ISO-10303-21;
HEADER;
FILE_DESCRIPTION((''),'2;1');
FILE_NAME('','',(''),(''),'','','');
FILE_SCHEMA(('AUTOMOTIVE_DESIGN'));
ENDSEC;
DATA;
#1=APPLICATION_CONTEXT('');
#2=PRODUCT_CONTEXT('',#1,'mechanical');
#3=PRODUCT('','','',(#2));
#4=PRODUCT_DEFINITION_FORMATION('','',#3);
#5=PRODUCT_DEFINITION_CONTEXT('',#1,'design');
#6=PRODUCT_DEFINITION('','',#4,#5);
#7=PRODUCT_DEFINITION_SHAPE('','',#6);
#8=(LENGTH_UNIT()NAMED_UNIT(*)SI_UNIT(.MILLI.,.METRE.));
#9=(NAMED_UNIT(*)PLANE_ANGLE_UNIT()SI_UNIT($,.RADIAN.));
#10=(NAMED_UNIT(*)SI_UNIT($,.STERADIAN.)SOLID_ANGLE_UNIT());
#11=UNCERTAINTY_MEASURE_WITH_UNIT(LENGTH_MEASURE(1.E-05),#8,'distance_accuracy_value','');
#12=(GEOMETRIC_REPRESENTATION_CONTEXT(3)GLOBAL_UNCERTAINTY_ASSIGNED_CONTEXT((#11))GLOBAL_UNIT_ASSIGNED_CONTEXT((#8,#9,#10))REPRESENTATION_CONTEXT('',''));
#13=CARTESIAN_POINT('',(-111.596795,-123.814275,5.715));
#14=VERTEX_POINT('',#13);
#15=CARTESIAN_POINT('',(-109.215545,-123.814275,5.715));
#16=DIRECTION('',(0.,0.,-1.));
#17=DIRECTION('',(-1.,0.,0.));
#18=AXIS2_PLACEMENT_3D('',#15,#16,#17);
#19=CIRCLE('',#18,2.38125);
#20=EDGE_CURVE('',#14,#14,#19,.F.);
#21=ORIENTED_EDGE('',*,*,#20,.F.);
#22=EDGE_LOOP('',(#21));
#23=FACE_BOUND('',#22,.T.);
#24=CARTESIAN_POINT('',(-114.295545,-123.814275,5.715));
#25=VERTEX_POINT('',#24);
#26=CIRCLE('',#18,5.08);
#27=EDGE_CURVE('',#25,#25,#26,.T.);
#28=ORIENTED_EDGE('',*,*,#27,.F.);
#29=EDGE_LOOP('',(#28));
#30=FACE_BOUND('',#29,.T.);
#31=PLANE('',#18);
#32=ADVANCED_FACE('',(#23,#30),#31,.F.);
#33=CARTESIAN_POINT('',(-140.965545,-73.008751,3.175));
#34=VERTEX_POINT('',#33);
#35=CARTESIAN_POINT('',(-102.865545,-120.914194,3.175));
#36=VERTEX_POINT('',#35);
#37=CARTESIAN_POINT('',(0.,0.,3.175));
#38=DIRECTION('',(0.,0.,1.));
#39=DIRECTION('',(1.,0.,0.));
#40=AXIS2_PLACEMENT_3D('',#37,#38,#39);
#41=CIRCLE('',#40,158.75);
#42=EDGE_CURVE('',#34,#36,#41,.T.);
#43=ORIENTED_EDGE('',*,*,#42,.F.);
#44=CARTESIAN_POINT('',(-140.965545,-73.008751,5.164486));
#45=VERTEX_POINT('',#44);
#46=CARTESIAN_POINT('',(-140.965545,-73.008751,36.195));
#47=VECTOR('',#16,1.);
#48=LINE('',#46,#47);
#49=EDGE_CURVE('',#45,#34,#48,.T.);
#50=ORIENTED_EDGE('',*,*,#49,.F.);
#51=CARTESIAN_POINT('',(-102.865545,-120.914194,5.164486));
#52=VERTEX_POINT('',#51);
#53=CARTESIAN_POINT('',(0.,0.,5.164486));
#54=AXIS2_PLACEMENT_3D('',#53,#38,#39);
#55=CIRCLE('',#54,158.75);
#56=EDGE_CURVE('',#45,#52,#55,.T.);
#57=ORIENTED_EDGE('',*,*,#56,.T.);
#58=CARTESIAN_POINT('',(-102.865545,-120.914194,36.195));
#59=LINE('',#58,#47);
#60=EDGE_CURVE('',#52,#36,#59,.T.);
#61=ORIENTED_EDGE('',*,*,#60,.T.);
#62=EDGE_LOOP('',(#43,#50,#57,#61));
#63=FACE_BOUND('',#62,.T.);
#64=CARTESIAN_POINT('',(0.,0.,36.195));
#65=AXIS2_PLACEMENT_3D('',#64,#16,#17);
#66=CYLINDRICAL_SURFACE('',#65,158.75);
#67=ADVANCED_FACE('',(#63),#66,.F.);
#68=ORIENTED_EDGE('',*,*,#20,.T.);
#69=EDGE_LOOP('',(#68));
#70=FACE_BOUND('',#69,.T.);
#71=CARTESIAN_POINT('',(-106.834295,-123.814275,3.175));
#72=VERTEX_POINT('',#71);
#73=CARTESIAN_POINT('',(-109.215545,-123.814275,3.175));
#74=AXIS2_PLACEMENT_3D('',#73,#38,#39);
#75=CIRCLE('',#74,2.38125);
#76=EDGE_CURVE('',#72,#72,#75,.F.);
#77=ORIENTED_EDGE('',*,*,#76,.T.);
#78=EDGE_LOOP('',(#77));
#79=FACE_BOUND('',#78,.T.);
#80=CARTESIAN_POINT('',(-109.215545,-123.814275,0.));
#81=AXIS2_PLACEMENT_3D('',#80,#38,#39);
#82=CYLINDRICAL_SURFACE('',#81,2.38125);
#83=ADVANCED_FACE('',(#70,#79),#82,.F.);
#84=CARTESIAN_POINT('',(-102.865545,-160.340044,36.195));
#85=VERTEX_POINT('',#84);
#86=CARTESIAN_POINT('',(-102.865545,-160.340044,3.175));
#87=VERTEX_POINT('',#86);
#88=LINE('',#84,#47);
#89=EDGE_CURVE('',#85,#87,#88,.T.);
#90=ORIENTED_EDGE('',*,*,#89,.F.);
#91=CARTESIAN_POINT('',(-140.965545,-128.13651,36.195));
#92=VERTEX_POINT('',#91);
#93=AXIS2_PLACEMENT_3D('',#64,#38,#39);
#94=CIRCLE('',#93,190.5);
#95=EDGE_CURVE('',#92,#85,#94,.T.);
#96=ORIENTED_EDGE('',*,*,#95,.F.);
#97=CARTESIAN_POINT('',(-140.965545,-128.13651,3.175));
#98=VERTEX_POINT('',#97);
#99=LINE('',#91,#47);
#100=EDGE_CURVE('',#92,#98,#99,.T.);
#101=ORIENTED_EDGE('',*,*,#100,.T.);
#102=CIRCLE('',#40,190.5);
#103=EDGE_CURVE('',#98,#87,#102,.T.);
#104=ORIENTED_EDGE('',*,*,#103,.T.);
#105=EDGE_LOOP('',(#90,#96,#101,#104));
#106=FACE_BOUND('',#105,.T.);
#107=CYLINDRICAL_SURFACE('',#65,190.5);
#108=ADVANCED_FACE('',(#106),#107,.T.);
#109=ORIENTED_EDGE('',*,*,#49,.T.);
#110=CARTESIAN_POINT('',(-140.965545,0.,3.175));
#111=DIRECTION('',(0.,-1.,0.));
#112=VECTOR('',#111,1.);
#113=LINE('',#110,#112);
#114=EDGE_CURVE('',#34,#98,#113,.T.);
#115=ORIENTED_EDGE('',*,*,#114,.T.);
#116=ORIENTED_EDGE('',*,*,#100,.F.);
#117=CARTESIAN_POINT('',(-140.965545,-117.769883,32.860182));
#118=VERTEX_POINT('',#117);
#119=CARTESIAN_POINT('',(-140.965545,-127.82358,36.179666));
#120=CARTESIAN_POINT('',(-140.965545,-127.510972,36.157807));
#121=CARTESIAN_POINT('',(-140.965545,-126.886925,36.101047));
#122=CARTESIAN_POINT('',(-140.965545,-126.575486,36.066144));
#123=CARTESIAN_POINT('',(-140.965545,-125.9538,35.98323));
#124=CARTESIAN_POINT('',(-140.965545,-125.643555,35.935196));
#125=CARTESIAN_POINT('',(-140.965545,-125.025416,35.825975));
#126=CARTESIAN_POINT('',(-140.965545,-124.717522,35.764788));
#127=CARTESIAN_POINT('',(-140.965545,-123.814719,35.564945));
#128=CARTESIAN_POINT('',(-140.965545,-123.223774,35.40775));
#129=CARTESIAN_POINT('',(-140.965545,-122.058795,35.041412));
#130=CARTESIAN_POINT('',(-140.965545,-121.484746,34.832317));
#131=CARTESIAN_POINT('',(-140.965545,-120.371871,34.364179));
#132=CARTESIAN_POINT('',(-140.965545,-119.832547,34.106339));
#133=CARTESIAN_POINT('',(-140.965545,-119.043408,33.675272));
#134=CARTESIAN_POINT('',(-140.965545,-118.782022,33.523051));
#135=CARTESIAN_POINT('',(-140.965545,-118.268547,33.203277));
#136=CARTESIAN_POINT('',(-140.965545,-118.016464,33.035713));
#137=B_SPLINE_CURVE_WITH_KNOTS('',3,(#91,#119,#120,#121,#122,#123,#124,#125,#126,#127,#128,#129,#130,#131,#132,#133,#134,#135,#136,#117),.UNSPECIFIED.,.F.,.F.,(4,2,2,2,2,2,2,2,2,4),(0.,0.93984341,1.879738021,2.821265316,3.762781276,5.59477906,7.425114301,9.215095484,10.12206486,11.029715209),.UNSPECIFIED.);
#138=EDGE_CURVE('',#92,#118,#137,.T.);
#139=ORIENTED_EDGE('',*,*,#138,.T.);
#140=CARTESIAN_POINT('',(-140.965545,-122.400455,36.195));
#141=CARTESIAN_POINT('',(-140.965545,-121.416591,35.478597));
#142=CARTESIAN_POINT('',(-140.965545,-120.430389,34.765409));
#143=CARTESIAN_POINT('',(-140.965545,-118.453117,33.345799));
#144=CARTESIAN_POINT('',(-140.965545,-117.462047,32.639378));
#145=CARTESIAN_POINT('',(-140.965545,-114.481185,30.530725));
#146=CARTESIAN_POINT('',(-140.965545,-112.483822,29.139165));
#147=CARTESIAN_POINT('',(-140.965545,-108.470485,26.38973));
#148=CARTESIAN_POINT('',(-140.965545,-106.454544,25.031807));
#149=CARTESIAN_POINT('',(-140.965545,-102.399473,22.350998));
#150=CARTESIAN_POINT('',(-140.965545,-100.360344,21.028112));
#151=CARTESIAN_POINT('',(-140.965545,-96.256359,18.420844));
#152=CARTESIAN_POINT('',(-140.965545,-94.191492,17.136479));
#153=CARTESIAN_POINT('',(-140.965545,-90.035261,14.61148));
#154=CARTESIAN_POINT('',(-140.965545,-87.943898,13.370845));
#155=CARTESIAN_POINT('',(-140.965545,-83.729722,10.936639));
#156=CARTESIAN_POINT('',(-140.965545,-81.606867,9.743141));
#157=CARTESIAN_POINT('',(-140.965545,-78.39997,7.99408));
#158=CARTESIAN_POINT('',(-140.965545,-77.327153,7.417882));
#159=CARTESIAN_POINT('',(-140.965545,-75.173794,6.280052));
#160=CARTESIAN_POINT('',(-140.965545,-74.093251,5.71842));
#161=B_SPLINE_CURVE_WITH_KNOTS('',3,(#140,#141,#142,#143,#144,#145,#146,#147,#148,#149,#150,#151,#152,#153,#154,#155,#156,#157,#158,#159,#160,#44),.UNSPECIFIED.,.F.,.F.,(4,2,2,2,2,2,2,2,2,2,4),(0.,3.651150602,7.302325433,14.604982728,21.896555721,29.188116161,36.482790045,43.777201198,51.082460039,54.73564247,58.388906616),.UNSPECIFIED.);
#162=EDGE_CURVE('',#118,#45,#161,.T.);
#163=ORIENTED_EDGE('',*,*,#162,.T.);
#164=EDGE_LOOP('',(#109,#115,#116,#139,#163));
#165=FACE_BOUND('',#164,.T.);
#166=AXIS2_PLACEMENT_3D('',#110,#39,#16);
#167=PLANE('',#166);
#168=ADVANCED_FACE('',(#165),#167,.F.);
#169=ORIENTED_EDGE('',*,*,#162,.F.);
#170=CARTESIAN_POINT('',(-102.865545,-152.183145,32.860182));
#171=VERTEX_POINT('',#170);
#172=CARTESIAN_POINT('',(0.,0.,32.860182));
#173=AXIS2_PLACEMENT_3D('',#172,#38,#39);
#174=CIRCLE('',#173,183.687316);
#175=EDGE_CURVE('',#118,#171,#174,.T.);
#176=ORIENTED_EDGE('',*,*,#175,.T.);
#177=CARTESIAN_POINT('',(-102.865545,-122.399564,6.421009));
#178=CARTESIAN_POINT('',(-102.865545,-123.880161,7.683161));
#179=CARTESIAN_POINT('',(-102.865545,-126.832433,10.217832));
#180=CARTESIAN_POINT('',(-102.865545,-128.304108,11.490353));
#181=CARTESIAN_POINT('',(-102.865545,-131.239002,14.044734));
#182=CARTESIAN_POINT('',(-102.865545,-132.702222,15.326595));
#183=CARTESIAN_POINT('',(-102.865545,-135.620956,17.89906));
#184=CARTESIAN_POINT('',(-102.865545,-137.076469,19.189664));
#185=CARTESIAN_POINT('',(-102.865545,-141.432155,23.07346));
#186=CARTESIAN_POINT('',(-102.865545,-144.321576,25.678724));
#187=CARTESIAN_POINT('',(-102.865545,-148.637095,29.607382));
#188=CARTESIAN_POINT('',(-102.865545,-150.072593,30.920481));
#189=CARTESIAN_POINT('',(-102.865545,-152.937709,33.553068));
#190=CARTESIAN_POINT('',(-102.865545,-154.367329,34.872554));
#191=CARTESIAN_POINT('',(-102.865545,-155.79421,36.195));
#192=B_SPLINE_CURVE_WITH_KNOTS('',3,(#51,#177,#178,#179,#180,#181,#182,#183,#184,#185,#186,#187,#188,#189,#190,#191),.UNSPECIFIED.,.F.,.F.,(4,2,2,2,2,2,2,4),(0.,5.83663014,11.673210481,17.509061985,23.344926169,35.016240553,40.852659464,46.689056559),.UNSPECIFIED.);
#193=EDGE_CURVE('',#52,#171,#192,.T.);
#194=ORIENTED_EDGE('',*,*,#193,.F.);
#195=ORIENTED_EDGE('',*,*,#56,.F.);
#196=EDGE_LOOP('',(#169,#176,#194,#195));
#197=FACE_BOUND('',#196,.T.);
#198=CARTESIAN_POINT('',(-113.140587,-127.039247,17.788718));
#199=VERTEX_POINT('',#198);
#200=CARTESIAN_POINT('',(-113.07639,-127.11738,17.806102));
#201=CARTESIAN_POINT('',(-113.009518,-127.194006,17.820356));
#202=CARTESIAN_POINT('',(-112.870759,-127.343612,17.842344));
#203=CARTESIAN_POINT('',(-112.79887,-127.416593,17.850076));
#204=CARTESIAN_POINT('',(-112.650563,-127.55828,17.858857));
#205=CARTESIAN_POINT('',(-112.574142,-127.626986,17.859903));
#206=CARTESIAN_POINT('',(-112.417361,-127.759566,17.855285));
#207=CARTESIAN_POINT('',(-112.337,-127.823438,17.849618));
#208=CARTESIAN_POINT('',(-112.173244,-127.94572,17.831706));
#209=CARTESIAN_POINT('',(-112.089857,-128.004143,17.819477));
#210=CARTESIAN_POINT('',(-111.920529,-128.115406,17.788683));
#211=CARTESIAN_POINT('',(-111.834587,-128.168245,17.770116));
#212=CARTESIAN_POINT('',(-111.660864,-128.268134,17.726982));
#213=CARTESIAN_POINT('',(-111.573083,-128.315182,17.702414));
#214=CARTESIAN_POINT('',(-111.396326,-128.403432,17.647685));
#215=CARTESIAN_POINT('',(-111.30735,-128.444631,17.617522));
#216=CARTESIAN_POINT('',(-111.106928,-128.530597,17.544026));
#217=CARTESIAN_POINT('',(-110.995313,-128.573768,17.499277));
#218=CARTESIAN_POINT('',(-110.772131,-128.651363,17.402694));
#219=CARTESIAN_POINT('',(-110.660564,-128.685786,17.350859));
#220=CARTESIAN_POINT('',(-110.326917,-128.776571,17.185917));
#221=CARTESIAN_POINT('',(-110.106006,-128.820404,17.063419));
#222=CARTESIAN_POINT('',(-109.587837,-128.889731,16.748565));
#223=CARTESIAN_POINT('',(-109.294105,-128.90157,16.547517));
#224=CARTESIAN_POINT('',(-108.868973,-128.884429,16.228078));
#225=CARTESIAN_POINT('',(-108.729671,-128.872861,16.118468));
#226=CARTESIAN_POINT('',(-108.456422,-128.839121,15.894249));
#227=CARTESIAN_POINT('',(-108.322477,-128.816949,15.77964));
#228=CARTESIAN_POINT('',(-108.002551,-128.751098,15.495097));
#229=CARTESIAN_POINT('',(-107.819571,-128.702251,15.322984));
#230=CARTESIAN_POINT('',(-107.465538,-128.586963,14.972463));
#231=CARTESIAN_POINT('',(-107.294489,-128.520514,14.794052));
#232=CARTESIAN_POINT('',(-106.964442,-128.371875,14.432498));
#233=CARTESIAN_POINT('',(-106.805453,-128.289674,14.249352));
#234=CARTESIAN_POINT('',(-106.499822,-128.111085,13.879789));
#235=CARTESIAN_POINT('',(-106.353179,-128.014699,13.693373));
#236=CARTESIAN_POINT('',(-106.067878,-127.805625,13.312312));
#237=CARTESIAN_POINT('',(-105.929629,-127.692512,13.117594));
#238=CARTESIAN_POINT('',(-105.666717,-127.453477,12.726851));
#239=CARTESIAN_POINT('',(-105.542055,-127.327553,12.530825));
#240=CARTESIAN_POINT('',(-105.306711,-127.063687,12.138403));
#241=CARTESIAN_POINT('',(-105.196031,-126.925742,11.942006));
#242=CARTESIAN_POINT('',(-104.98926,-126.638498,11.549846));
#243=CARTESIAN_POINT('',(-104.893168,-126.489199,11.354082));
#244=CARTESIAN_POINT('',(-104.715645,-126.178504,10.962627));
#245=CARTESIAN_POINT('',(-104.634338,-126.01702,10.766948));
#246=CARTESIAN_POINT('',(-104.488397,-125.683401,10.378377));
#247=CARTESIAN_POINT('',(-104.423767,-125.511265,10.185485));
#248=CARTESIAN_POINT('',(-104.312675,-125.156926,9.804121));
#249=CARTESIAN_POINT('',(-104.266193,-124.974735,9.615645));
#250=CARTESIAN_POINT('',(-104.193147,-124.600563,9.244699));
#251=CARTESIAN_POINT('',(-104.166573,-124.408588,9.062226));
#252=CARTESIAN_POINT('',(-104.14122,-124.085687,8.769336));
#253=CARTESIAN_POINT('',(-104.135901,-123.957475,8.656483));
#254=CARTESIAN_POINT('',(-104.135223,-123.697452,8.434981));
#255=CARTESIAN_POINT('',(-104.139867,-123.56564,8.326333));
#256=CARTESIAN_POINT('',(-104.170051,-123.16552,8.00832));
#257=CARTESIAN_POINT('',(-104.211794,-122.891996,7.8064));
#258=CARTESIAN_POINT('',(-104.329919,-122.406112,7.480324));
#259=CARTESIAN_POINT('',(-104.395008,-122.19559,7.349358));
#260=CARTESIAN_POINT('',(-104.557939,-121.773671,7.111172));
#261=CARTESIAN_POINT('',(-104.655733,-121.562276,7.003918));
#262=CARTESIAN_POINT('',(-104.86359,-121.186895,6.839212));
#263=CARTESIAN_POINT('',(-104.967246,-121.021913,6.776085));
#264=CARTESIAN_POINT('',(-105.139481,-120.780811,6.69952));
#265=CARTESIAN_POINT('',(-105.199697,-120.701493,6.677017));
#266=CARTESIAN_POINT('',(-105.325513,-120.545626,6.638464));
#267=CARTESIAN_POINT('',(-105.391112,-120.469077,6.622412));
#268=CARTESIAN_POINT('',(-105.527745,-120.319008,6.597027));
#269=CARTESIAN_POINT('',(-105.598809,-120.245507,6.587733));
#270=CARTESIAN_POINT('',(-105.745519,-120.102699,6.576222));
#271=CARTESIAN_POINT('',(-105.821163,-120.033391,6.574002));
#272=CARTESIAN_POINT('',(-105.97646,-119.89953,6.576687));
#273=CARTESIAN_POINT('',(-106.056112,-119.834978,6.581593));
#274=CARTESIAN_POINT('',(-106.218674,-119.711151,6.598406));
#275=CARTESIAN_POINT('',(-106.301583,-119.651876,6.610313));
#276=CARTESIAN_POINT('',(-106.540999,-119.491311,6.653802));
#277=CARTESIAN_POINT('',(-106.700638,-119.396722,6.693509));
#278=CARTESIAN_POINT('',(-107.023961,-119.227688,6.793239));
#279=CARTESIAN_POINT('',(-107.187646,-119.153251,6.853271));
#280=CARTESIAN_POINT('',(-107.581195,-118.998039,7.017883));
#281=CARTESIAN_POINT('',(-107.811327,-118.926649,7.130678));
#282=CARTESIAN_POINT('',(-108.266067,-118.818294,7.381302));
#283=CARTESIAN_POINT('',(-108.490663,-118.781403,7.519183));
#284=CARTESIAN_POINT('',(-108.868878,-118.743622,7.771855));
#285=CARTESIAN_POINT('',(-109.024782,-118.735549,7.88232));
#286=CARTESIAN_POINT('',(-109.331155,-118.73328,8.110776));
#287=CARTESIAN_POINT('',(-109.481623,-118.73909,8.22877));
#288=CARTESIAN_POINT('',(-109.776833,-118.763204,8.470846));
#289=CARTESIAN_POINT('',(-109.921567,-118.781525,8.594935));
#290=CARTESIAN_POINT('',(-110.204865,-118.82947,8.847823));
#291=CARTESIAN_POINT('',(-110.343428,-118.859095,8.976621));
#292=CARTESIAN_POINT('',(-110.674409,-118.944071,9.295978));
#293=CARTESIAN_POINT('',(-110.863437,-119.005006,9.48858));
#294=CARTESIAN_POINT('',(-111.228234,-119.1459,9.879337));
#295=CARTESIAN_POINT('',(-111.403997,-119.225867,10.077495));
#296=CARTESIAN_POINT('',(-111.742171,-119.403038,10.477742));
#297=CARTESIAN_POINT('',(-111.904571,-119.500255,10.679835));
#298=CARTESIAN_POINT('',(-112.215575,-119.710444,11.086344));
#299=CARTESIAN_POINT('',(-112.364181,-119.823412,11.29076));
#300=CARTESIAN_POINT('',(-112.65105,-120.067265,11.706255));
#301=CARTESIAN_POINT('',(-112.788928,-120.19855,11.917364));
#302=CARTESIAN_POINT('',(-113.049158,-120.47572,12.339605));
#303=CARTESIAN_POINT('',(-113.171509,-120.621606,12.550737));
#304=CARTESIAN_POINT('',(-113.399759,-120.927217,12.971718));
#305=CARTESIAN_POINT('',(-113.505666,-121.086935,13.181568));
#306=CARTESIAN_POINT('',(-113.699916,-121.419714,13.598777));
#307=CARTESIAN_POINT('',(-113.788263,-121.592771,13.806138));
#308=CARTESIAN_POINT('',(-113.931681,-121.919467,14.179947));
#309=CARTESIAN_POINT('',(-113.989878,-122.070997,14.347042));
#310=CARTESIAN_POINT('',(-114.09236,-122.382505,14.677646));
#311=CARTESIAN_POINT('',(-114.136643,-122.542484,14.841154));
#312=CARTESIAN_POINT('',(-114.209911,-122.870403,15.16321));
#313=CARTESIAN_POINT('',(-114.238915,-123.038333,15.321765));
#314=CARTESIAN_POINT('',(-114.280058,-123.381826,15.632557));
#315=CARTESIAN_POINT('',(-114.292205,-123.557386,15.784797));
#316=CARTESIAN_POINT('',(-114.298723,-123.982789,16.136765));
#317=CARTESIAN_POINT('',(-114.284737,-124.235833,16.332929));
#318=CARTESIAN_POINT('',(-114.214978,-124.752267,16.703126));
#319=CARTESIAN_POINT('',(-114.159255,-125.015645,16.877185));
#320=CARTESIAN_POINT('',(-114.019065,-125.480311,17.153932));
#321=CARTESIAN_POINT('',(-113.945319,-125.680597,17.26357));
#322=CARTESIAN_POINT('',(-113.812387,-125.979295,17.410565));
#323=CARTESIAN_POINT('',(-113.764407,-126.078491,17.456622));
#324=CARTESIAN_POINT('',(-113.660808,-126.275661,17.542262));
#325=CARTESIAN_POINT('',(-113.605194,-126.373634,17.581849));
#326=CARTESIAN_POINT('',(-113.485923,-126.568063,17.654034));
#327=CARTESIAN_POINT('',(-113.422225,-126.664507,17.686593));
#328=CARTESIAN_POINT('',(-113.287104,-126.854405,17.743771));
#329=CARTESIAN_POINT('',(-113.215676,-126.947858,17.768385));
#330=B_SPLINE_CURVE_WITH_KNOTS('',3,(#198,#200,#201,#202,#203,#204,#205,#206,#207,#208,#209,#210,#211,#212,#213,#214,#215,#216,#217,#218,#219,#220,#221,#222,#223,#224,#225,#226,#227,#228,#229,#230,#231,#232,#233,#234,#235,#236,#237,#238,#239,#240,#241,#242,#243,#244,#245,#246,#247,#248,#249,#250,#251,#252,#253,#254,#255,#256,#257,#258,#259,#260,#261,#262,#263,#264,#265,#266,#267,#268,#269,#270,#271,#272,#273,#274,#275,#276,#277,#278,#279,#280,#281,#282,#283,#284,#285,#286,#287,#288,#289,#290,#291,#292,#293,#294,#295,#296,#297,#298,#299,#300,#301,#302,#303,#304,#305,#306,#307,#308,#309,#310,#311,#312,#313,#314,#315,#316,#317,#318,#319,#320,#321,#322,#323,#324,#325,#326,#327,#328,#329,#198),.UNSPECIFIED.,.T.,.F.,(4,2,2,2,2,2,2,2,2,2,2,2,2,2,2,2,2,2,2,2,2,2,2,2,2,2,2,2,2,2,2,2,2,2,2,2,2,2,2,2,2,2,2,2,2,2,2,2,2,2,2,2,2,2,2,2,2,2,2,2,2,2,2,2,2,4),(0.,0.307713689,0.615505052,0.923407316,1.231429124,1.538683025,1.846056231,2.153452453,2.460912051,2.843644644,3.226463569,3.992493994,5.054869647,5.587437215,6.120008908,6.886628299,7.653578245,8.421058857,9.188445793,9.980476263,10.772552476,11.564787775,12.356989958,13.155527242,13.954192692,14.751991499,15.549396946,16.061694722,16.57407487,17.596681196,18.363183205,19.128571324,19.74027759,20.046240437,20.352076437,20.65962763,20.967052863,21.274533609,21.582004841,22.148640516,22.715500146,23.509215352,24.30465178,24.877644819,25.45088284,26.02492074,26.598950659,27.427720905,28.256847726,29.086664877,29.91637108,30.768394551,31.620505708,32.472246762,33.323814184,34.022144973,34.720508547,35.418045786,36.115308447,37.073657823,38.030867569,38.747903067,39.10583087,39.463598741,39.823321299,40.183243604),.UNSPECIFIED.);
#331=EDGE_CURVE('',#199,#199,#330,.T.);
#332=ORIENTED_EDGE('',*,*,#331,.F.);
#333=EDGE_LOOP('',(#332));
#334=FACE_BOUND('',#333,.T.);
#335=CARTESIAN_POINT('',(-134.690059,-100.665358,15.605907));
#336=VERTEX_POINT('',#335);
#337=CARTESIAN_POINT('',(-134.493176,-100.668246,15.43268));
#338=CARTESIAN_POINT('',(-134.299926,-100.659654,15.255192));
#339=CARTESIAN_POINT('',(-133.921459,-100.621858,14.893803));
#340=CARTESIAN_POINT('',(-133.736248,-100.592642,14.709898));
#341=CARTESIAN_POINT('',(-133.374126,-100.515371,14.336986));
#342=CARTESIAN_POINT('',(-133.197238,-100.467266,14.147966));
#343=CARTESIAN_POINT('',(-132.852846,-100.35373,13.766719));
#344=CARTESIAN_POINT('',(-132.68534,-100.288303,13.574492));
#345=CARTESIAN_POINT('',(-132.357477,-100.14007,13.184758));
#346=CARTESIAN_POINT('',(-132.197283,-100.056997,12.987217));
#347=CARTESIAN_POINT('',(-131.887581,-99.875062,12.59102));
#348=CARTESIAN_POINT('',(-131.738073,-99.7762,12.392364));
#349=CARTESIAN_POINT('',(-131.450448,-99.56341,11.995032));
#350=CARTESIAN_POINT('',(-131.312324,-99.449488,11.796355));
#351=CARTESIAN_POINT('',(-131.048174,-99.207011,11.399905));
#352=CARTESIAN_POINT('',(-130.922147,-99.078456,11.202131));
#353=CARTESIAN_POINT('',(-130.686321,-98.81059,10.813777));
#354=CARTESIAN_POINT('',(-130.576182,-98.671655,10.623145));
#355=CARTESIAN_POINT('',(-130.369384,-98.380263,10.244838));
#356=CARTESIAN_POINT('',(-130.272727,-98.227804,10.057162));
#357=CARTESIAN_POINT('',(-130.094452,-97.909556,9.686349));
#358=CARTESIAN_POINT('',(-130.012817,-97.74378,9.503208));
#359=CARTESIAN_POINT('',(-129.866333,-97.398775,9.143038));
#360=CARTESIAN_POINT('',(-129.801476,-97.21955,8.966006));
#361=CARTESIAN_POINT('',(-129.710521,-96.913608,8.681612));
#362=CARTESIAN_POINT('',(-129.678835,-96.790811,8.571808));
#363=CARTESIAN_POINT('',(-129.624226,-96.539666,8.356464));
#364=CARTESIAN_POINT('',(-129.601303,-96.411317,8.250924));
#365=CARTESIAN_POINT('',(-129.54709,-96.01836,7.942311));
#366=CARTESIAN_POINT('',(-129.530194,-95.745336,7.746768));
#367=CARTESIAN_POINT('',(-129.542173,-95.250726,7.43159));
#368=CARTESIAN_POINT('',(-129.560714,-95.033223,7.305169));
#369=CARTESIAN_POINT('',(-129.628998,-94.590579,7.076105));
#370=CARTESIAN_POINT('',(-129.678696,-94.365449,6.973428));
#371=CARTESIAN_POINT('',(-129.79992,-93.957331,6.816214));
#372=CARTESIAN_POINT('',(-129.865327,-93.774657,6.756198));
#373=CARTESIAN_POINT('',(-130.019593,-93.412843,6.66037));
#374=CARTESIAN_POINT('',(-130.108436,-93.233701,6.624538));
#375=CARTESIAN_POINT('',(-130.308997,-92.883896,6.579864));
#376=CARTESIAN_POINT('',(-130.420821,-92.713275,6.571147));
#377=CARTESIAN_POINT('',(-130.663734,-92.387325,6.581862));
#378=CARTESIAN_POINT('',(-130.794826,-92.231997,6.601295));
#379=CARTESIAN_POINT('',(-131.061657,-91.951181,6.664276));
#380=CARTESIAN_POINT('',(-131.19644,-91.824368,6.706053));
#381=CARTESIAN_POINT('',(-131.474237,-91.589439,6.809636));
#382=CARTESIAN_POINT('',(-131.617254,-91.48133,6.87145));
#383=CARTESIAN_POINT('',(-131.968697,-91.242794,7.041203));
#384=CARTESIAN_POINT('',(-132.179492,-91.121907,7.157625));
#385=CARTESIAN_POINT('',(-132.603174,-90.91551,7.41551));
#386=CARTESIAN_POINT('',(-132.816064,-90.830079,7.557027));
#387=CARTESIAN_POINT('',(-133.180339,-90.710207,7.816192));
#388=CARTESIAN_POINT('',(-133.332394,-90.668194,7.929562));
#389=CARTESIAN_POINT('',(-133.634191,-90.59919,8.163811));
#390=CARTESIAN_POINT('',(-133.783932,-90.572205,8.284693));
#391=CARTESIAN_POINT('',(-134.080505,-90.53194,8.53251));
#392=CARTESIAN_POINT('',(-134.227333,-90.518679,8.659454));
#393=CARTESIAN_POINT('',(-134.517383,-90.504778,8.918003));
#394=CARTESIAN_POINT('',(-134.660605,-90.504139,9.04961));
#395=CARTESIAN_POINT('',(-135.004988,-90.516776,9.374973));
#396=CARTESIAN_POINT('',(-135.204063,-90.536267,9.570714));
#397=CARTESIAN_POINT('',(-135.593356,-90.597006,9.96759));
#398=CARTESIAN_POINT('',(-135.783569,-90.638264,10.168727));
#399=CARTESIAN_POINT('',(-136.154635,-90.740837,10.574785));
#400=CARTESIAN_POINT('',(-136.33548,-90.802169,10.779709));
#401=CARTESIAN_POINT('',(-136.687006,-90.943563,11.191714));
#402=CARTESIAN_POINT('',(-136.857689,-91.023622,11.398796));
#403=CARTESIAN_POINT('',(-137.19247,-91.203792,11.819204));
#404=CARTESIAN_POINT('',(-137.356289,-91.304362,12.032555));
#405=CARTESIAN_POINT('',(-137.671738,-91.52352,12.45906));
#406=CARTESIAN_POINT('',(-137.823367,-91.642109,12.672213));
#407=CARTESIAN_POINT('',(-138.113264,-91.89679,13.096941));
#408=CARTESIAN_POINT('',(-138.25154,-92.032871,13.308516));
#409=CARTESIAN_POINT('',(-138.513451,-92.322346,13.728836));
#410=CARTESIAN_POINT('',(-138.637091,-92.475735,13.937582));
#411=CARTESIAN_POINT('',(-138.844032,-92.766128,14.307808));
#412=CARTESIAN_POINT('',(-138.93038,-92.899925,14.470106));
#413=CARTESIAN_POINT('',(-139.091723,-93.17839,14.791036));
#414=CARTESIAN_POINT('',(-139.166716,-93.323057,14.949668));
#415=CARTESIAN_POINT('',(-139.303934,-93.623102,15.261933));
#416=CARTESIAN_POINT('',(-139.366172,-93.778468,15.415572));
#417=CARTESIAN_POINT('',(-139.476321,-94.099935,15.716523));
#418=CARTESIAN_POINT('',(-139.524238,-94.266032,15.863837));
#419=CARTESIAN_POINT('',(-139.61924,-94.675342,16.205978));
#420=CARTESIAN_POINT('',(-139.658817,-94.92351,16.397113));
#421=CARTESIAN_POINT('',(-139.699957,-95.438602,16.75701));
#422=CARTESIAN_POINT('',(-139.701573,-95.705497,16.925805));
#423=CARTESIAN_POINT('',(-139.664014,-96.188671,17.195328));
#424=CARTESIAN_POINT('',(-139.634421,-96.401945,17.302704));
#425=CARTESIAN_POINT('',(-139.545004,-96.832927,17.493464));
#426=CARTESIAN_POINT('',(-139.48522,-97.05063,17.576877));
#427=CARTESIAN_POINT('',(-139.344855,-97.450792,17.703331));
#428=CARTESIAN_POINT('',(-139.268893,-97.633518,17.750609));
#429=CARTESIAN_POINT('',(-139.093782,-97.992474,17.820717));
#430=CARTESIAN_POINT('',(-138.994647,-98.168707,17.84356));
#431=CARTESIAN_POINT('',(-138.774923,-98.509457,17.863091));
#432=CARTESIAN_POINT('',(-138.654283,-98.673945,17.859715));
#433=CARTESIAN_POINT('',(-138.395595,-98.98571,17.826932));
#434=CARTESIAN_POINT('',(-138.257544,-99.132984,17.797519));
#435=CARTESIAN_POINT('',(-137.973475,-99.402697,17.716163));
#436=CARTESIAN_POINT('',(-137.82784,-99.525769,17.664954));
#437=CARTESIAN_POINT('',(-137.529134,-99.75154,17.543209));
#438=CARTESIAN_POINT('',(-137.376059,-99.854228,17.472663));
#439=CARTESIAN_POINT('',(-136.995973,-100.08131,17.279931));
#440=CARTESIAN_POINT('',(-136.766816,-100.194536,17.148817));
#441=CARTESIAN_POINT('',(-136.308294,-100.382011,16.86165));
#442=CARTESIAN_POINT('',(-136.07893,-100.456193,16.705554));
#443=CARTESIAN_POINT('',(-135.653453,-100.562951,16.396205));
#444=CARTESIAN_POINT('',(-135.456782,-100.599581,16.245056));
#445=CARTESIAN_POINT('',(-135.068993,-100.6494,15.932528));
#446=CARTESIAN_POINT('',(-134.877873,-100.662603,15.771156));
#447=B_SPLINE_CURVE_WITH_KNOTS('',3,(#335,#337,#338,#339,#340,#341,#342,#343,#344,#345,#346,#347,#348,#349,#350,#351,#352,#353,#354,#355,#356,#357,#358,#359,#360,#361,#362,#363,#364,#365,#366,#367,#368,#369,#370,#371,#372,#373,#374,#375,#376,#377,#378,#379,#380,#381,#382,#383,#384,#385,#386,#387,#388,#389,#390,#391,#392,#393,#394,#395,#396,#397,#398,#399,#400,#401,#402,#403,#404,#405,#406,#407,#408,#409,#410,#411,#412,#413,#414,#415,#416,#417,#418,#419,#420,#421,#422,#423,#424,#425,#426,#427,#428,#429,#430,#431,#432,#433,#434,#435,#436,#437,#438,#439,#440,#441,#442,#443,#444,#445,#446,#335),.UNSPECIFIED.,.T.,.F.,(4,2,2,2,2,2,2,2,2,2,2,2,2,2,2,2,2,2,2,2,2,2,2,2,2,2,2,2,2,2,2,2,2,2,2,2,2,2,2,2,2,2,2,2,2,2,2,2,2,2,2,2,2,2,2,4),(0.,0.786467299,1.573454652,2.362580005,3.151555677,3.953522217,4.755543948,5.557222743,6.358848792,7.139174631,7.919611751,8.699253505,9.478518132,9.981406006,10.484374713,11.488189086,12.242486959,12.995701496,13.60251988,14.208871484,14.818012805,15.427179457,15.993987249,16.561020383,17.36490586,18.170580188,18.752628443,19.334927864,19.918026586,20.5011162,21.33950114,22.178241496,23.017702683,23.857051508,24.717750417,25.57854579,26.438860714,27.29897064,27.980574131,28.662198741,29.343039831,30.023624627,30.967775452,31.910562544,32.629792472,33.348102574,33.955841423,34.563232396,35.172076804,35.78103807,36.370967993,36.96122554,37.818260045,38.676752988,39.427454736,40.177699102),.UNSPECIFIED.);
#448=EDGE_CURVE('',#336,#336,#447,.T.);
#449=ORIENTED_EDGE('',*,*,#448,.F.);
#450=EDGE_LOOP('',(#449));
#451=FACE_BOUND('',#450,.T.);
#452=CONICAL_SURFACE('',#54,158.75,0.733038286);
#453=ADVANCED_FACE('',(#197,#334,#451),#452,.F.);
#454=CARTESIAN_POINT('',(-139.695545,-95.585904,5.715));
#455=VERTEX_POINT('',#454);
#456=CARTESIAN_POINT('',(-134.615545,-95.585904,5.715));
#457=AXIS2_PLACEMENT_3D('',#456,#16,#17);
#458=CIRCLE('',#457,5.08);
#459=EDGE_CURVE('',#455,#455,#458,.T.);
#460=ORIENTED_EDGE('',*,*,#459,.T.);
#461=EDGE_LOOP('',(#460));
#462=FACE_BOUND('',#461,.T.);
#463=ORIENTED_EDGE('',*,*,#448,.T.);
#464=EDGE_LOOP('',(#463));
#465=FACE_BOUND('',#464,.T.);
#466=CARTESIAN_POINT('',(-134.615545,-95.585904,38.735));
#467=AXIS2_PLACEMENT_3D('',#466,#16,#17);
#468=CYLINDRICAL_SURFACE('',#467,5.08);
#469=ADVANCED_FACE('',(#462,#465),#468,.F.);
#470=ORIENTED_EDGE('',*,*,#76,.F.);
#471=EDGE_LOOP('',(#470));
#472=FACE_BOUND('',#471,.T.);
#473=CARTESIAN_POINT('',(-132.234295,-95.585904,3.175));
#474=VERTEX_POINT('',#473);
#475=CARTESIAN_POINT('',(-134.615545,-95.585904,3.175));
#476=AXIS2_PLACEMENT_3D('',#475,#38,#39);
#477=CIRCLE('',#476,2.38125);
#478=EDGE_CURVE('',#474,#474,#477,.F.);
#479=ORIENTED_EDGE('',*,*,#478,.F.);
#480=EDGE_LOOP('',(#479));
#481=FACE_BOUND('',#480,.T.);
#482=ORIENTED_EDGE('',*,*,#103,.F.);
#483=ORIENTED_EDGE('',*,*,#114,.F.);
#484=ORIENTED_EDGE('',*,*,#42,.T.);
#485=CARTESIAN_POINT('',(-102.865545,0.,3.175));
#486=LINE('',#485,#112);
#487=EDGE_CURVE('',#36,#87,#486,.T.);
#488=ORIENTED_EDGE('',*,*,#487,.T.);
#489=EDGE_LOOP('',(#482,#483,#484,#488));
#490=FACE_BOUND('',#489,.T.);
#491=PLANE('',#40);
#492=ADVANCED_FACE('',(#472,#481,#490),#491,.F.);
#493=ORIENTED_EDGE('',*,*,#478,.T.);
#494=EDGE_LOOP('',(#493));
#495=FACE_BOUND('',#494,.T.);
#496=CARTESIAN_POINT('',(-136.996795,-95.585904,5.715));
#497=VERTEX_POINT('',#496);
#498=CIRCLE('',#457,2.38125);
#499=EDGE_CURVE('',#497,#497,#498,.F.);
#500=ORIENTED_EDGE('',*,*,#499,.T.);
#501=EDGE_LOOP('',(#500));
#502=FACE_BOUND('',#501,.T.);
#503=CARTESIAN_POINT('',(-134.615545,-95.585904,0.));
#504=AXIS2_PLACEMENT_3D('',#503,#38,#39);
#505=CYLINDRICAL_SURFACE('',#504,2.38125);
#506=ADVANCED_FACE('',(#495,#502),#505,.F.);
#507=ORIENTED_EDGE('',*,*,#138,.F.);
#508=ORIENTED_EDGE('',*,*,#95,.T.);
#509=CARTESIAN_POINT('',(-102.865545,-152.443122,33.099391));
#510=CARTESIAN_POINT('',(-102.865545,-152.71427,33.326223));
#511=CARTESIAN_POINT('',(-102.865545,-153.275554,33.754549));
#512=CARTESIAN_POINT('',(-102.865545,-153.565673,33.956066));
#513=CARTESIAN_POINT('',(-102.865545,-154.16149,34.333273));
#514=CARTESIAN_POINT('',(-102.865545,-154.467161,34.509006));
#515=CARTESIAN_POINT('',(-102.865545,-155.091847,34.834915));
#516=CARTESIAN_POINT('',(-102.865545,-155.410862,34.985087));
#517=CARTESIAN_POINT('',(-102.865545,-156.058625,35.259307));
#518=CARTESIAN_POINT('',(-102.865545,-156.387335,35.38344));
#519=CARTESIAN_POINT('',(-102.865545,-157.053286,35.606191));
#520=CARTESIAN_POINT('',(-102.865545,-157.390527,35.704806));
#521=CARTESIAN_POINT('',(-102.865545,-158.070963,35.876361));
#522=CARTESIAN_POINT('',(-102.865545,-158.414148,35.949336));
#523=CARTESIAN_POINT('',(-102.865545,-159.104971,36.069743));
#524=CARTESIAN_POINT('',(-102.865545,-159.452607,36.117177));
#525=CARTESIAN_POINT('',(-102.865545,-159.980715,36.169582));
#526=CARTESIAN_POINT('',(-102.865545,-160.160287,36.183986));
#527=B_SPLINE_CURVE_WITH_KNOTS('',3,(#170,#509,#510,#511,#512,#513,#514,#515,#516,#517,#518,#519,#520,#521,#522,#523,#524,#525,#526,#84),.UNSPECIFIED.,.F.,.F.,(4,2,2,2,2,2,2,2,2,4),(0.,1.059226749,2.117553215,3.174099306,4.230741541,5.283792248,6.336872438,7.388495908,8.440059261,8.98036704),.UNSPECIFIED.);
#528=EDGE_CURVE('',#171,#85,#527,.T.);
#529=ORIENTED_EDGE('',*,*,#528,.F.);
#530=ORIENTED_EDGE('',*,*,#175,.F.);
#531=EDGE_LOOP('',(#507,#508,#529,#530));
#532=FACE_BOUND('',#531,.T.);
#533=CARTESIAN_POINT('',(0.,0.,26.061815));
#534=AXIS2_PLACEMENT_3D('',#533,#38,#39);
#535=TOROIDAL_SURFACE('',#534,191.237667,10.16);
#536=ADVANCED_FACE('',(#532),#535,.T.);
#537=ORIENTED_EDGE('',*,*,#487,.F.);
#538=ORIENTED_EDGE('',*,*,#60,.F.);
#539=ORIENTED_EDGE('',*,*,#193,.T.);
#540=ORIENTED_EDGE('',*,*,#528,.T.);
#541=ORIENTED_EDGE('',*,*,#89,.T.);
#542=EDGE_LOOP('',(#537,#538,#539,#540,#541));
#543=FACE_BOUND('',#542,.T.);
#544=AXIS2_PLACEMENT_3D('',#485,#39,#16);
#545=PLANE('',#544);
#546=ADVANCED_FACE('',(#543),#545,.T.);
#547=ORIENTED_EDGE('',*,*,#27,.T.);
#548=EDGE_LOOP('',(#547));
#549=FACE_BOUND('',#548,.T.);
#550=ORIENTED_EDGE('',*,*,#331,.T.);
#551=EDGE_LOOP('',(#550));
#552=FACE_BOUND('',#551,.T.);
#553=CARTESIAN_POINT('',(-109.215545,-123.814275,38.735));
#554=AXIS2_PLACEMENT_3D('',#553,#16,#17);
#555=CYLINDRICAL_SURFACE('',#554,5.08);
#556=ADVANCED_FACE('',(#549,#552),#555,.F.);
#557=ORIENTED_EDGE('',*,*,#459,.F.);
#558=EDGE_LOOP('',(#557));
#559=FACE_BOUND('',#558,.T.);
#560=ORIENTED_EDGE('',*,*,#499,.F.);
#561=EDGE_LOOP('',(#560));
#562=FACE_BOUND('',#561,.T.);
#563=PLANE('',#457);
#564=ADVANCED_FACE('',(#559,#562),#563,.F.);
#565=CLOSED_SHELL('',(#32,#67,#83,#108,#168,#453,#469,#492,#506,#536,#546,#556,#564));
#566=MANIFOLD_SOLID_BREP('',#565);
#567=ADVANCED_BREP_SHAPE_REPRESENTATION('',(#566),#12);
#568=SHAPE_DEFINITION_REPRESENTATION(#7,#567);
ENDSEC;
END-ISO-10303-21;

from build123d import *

# Parameters (mm, degrees)
SKETCH1_R               = 2.38125
BOSS_EXTRUDE1_DEPTH     = 3.175
BOSS_EXTRUDE2_DEPTH     = 50.8
CUT_EXTRUDE1_DEPTH      = 209.526843613
CUT_EXTRUDE1_DEPTH_BACK = 209.526843613
SKETCH3_R               = 203.829254644
SKETCH3_R_2             = 174.625
SKETCH5_R               = 2.38125
CUT_EXTRUDE3_DEPTH      = 200.484174202
SKETCH6_W               = 205.731089426
SKETCH6_H               = 25.4
BOSS_EXTRUDE3_DEPTH     = 3.175
SKETCH8_R               = 2.38125
CUT_EXTRUDE5_DEPTH      = 200.484174202
SKETCH9_W               = 205.731089426
SKETCH9_H               = 38.1
BOSS_EXTRUDE4_DEPTH     = 3.175
SKETCH10_R              = 6.35
SKETCH10_R_2            = 2.38125
CUT_EXTRUDE6_DEPTH      = 200.484174202
SKETCH11_W              = 53.331089426
SKETCH11_H              = 31.75
BOSS_EXTRUDE5_DEPTH     = 3.175
FILLET1_R               = 10.16
SKETCH12_R              = 6.35
SKETCH12_R_2            = 2.38125
CUT_EXTRUDE7_DEPTH      = 200.484174202
FILLET2_R               = 2.54
CUT_EXTRUDE8_DEPTH      = 200.484174202
SKETCH14_W              = 2.759281453
SKETCH14_H              = 7.963584416
SKETCH14_W_2            = 2.527010149
SKETCH14_H_2            = 5.938870156
BOSS_EXTRUDE6_DEPTH     = 3.175
FILLET3_R               = 2.54
SKETCH15_R              = 2.38125
BOSS_EXTRUDE7_DEPTH     = 33.02
SKETCH16_R              = 227.754671792
SKETCH16_W              = 368.539826918
SKETCH16_H              = 147.114866813
CUT_EXTRUDE9_DEPTH      = 217.033643064
SKETCH17_R              = 87.195519402
CUT_EXTRUDE10_DEPTH     = 217.033642998
CHAMFER1_SIZE           = 27.94
CHAMFER1_SIZE_2         = 31.030513664
CUT_EXTRUDE12_START     = -2.54
SKETCH18_R              = 5.08
CUT_EXTRUDE12_DEPTH     = 33.02
FILLET4_R               = 10.16


with BuildPart() as part:
    # Sketch1 → Boss-Extrude1 (new body)
    with BuildSketch(Plane.XY):
        with BuildLine():
            Line((-102.865544713, 31.75), (-102.865544713, 145.022480019))
            ThreePointArc((-102.865544713, 145.022480019), (-123.286100955, 128.114703728), (-140.965544713, 108.358457002))
            Line((-140.965544713, 108.358457002), (-140.965544713, -108.358457002))
            ThreePointArc((-140.965544713, -108.358457002), (-123.286100955, -128.114703728), (-102.865544713, -145.022480019))
            Line((-102.865544713, -145.022480019), (-102.865544713, -69.85))
            Line((-102.865544713, -69.85), (102.865544713, -69.85))
            Line((102.865544713, -69.85), (102.865544713, -145.022480019))
            ThreePointArc((102.865544713, -145.022480019), (123.286100955, -128.114703728), (140.965544713, -108.358457002))
            Line((140.965544713, -108.358457002), (140.965544713, 108.358457002))
            ThreePointArc((140.965544713, 108.358457002), (123.286100955, 128.114703728), (102.865544713, 145.022480019))
            Line((102.865544713, 145.022480019), (102.865544713, 31.75))
            Line((102.865544713, 31.75), (-102.865544713, 31.75))
        make_face()
        with Locations((25.4, -38.1)):
            Circle(SKETCH1_R, mode=Mode.SUBTRACT)
        with Locations((-25.4, -38.1)):
            Circle(SKETCH1_R, mode=Mode.SUBTRACT)
        with Locations((0, -38.1)):
            Circle(SKETCH1_R, mode=Mode.SUBTRACT)
    extrude(amount=BOSS_EXTRUDE1_DEPTH)

    # Sketch2 → Boss-Extrude2 (add)
    with BuildSketch(Plane.XY.offset(3.175)):
        with BuildLine():
            ThreePointArc((-102.865544713, -141.111907137), (-123.390730203, -123.566250752), (-140.965544713, -103.06602655))
            Line((-140.965544713, -103.06602655), (-140.965544713, -108.358457002))
            ThreePointArc((-140.965544713, -108.358457002), (-123.286100955, -128.114703728), (-102.865544713, -145.022480019))
            Line((-102.865544713, -145.022480019), (-102.865544713, -141.111907137))
        make_face()
        with BuildLine():
            ThreePointArc((140.965544713, -103.06602655), (123.390730203, -123.566250752), (102.865544713, -141.111907137))
            Line((102.865544713, -141.111907137), (102.865544713, -145.022480019))
            ThreePointArc((102.865544713, -145.022480019), (123.286100955, -128.114703728), (140.965544713, -108.358457002))
            Line((140.965544713, -108.358457002), (140.965544713, -103.06602655))
        make_face()
    extrude(amount=BOSS_EXTRUDE2_DEPTH)

    # Sketch3 → Cut-Extrude1 (cut, two sides: drawn at the far end of the back side and taken through both)
    with BuildSketch(Plane.XY.offset(3.175).offset(-CUT_EXTRUDE1_DEPTH_BACK)):
        Circle(SKETCH3_R)
        Circle(SKETCH3_R_2, mode=Mode.SUBTRACT)
    extrude(amount=CUT_EXTRUDE1_DEPTH + CUT_EXTRUDE1_DEPTH_BACK, mode=Mode.SUBTRACT)

    # Sketch5 → Cut-Extrude3 (cut, through all)
    with BuildSketch(Plane.XY.offset(3.175)):
        with Locations((134.615544713, -95.585904409)):
            Circle(SKETCH5_R)
        with Locations((109.215544713, -123.814275401)):
            Circle(SKETCH5_R)
        with Locations(Location((-134.615544713, -95.585904409, 0), (0, 0, 180))):
            Circle(SKETCH5_R)
        with Locations(Location((-109.215544713, -123.814275401, 0), (0, 0, 180))):
            Circle(SKETCH5_R)
    extrude(amount=-CUT_EXTRUDE3_DEPTH, mode=Mode.SUBTRACT)

    # Sketch6 → Boss-Extrude3 (add)
    with BuildSketch(Plane.XY.offset(3.175)):
        with Locations((0, 77.611907137)):
            Rectangle(SKETCH6_W, SKETCH6_H)
    extrude(amount=-BOSS_EXTRUDE3_DEPTH)

    # Sketch8 → Cut-Extrude5 (cut, through all)
    with BuildSketch(Plane.XY.offset(3.175)):
        with Locations((-38.1, -38.1)):
            Circle(SKETCH8_R)
        with Locations((-50.8, -38.1)):
            Circle(SKETCH8_R)
        with Locations((12.7, -38.1)):
            Circle(SKETCH8_R)
        with Locations((-12.7, -38.1)):
            Circle(SKETCH8_R)
    extrude(amount=-CUT_EXTRUDE5_DEPTH, mode=Mode.SUBTRACT)

    # Sketch9 → Boss-Extrude4 (add)
    with BuildSketch(Plane.XY.offset(3.175)):
        with Locations((0, -88.9)):
            Rectangle(SKETCH9_W, SKETCH9_H)
    extrude(amount=-BOSS_EXTRUDE4_DEPTH)

    # Sketch10 → Cut-Extrude6 (cut, through all)
    with BuildSketch(Plane.XY.offset(3.175)):
        with Locations((0, -76.2)):
            Circle(SKETCH10_R)
        with Locations((-25.4, -76.2)):
            Circle(SKETCH10_R_2)
        with Locations((-38.1, -76.2)):
            Circle(SKETCH10_R_2)
        with Locations((25.4, -76.2)):
            Circle(SKETCH10_R_2)
    extrude(amount=-CUT_EXTRUDE6_DEPTH, mode=Mode.SUBTRACT)

    # Sketch11 → Boss-Extrude5 (add)
    with BuildSketch(Plane.XY.offset(3.175)):
        with Locations((0, -123.825)):
            Rectangle(SKETCH11_W, SKETCH11_H)
    extrude(amount=-BOSS_EXTRUDE5_DEPTH)

    # Fillet1
    fillet1_edges = [part.edges().sort_by_distance(p)[0] for p in [
        (-26.665544713, -139.7, 1.5875),
        (-26.665544713, -107.95, 1.5875),
        (26.665544713, -107.95, 1.5875),
        (26.665544713, -139.7, 1.5875),
    ]]
    fillet(fillet1_edges, radius=FILLET1_R)

    # Sketch12 → Cut-Extrude7 (cut, through all)
    with BuildSketch(Plane.XY.offset(3.175)):
        with Locations((-25.4, -76.2)):
            Circle(SKETCH12_R)
        with Locations((25.4, -76.2)):
            Circle(SKETCH12_R)
        with Locations((-8.66775, -67.53225)):
            Circle(SKETCH12_R_2)
        with Locations((8.66775, -67.53225)):
            Circle(SKETCH12_R_2)
        with Locations((8.66775, -84.86775)):
            Circle(SKETCH12_R_2)
        with Locations((-8.66775, -84.86775)):
            Circle(SKETCH12_R_2)
    extrude(amount=-CUT_EXTRUDE7_DEPTH, mode=Mode.SUBTRACT)

    # Fillet2
    fillet2_edges = [part.edges().sort_by_distance(p)[0] for p in [
        (-102.865544713, 141.111907137, 1.5875),
        (102.865544713, 141.111907137, 1.5875),
    ]]
    fillet(fillet2_edges, radius=FILLET2_R)

    # Sketch13 → Cut-Extrude8 (cut, through all)
    # profile 1 of 4: a face of its own
    with BuildSketch(Plane.XY.offset(3.175)):
        with BuildLine():
            Line((-29.807958333, -15.810565048), (-38.216416667, -15.810565048))
            Line((-38.216416667, -15.810565048), (-33.538583333, 6.245101619))
            Line((-33.538583333, 6.245101619), (-38.803791667, 6.245101619))
            Line((-38.803791667, 6.245101619), (-39.682208333, 2.075268285))
            Line((-39.682208333, 2.075268285), (-48.095958333, 2.075268285))
            Line((-48.095958333, 2.075268285), (-47.397458333, 5.477809952))
            add(Edge.make_bspline(
                [(-47.397458333, 5.477809952), (-47.320569058, 5.758194134), (-47.170922216, 6.303895823), (-46.789013651, 7.053374007), (-46.29771223, 7.715065901), (-45.690436731, 8.272796577), (-45.006500067, 8.730292102), (-44.253147871, 9.054960677), (-43.448405111, 9.260244914), (-42.891974442, 9.282012228), (-42.6085, 9.293101619)],
                knots=[0, 0, 0, 0, 1.050168006, 2.043904372, 3.024673376, 4.01863537, 5.013909092, 5.989008141, 6.975497172, 8, 8, 8, 8], degree=3))
            Line((-42.6085, 9.293101619), (-24.463375, 9.293101619))
            Line((-24.463375, 9.293101619), (-29.807958333, -15.810565048))
        make_face()
    # profile 2 of 4: a face of its own
    with BuildSketch(Plane.XY.offset(3.175)):
        with BuildLine():
            add(Edge.make_bspline(
                [(-3.566583333, -12.132856715), (-3.643765668, -12.421811436), (-3.79437451, -12.985659844), (-4.17293599, -13.764550451), (-4.665381385, -14.453577746), (-5.270434906, -15.036263062), (-5.950809803, -15.518035961), (-6.703009887, -15.859816489), (-7.511777843, -16.068702787), (-8.070292693, -16.093985699), (-8.355541667, -16.106898381)],
                knots=[0, 0, 0, 0, 1.062369753, 2.073042759, 3.062499936, 4.061251344, 5.048575831, 6.014824268, 6.986115874, 8, 8, 8, 8], degree=3))
            Line((-8.355541667, -16.106898381), (-22.547791667, -16.106898381))
            add(Edge.make_bspline(
                [(-22.547791667, -16.106898381), (-22.69262218, -16.104596964), (-22.972752339, -16.100145578), (-23.378206431, -16.044702396), (-23.755568174, -15.960682303), (-24.107157142, -15.846746121), (-24.426210233, -15.691540895), (-24.716954418, -15.504453058), (-24.976786635, -15.281711317), (-25.203806964, -15.025677099), (-25.40308213, -14.746169713), (-25.554358436, -14.435544628), (-25.674211179, -14.106195373), (-25.74344938, -13.752832717), (-25.791514529, -13.37950469), (-25.77975916, -12.981941289), (-25.73922686, -12.562383844), (-25.682974686, -12.278883611), (-25.654, -12.132856715)],
                knots=[0, 0, 0, 0, 1.158779845, 2.241303809, 3.269110906, 4.251580925, 5.192683609, 6.101443689, 7.012833415, 7.922909267, 8.835720222, 9.751475912, 10.680528402, 11.633319635, 12.628295421, 13.687540584, 14.808885378, 16, 16, 16, 16], degree=3))
            Line((-25.654, -12.132856715), (-21.997458333, 5.319059952))
            add(Edge.make_bspline(
                [(-21.997458333, 5.319059952), (-21.920272116, 5.608009048), (-21.769655695, 6.171846477), (-21.391148554, 6.950815808), (-20.898502375, 7.639552216), (-20.293153244, 8.224337096), (-19.608609326, 8.702683082), (-18.855913228, 9.046275843), (-18.048644228, 9.254382857), (-17.4919553, 9.28003834), (-17.2085, 9.293101619)],
                knots=[0, 0, 0, 0, 1.062516124, 2.073328378, 3.062921881, 4.061810895, 5.05442655, 6.020808115, 6.992233544, 8, 8, 8, 8], degree=3))
            Line((-17.2085, 9.293101619), (-3.01625, 9.293101619))
            add(Edge.make_bspline(
                [(-3.01625, 9.293101619), (-2.871419505, 9.290800192), (-2.591289383, 9.286348788), (-2.185835038, 9.230905733), (-1.808474182, 9.146885197), (-1.456882118, 9.03295056), (-1.137839887, 8.877739913), (-0.847056821, 8.690671483), (-0.587369032, 8.467857656), (-0.359809395, 8.212092615), (-0.16209325, 7.930921186), (-0.002983257, 7.623293687), (0.114459046, 7.2921344), (0.187047795, 6.939473562), (0.223589985, 6.565305639), (0.223678302, 6.168188246), (0.179743785, 5.748571863), (0.123975462, 5.465081675), (0.09525, 5.319059952)],
                knots=[0, 0, 0, 0, 1.158432062, 2.24063113, 3.268129752, 4.250304904, 5.191125136, 6.099612471, 7.010728663, 7.920531375, 8.833068369, 9.75494936, 10.683723015, 11.636228288, 12.62940148, 13.688234619, 14.809242866, 16, 16, 16, 16], degree=3))
            Line((0.09525, 5.319059952), (-3.566583333, -12.132856715))
        make_face()
        Polygon((-13.403791667, 6.245101619), (-17.425458333, -13.058898381), (-12.16025, -13.058898381), (-8.138583333, 6.245101619), align=None, mode=Mode.SUBTRACT)
    # profile 3 of 4: a face of its own
    with BuildSketch(Plane.XY.offset(3.175)):
        with BuildLine():
            Line((11.557, 9.293101619), (8.556625, -5.269565048))
            Line((8.556625, -5.269565048), (13.827125, -5.269565048))
            Line((13.827125, -5.269565048), (16.8275, 9.293101619))
            Line((16.8275, 9.293101619), (25.235958333, 9.293101619))
            Line((25.235958333, 9.293101619), (19.896666667, -16.106898381))
            Line((19.896666667, -16.106898381), (11.482916667, -16.106898381))
            Line((11.482916667, -16.106898381), (13.165666667, -8.317565048))
            Line((13.165666667, -8.317565048), (3.439583333, -8.317565048))
            add(Edge.make_bspline(
                [(3.439583333, -8.317565048), (3.294736233, -8.315312365), (3.014573993, -8.310955241), (2.609344629, -8.25485176), (2.230636814, -8.173029355), (1.881290806, -8.050712181), (1.561052368, -7.897312045), (1.270346477, -7.709804396), (1.009103929, -7.48515858), (0.777806767, -7.227358437), (0.580756638, -6.941550122), (0.426179112, -6.6292081), (0.309007624, -6.297036788), (0.237889907, -5.94070984), (0.190785312, -5.563660832), (0.202000265, -5.162620664), (0.243321079, -4.739613917), (0.29915982, -4.45427987), (0.328083333, -4.306481715)],
                knots=[0, 0, 0, 0, 1.152191709, 2.228561082, 3.250524676, 4.231939746, 5.167691878, 6.071285285, 6.977493388, 7.902223819, 8.821393841, 9.731943086, 10.66895861, 11.616332835, 12.619603957, 13.686867372, 14.801836863, 16, 16, 16, 16], degree=3))
            Line((0.328083333, -4.306481715), (3.14325, 9.293101619))
            Line((3.14325, 9.293101619), (11.557, 9.293101619))
        make_face()
    # profile 4 of 4: a face of its own
    with BuildSketch(Plane.XY.offset(3.175)):
        with BuildLine():
            Line((33.374541667, -13.058898381), (47.0535, -13.058898381))
            Line((47.0535, -13.058898381), (46.392041667, -16.106898381))
            Line((46.392041667, -16.106898381), (24.304625, -16.106898381))
            Line((24.304625, -16.106898381), (25.802166667, -9.143065048))
            add(Edge.make_bspline(
                [(25.802166667, -9.143065048), (25.879273752, -8.861031474), (26.029757165, -8.310610268), (26.410334887, -7.552072135), (26.901419327, -6.879703753), (27.508831265, -6.311820899), (28.191228528, -5.842472815), (28.946271137, -5.513745702), (29.752164487, -5.300517366), (30.311046908, -5.28002739), (30.596416667, -5.269565048)],
                knots=[0, 0, 0, 0, 1.049169808, 2.047576474, 3.031944376, 4.027910562, 5.023553593, 5.994653504, 6.976054309, 8, 8, 8, 8], degree=3))
            Line((30.596416667, -5.269565048), (40.3225, -5.269565048))
            Line((40.3225, -5.269565048), (42.661416667, 6.245101619))
            Line((42.661416667, 6.245101619), (37.396208333, 6.245101619))
            Line((37.396208333, 6.245101619), (36.517791667, 2.075268285))
            Line((36.517791667, 2.075268285), (28.104041667, 2.075268285))
            Line((28.104041667, 2.075268285), (28.802541667, 5.477809952))
            add(Edge.make_bspline(
                [(28.802541667, 5.477809952), (28.879430942, 5.758194134), (29.029077784, 6.303895823), (29.410986349, 7.053374007), (29.90228777, 7.715065901), (30.509563269, 8.272796577), (31.193499933, 8.730292102), (31.946852129, 9.054960677), (32.751594889, 9.260244914), (33.308025558, 9.282012228), (33.5915, 9.293101619)],
                knots=[0, 0, 0, 0, 1.050168006, 2.043904372, 3.024673376, 4.01863537, 5.013909092, 5.989008141, 6.975497172, 8, 8, 8, 8], degree=3))
            Line((33.5915, 9.293101619), (47.78375, 9.293101619))
            add(Edge.make_bspline(
                [(47.78375, 9.293101619), (47.92859726, 9.290849086), (48.208759811, 9.286492252), (48.613987002, 9.230386738), (48.992702458, 9.148571481), (49.342021711, 9.026229282), (49.662353678, 8.87291663), (49.952725098, 8.685096123), (50.214324347, 8.462382804), (50.440285412, 8.20121114), (50.636405741, 7.915869715), (50.798510828, 7.606235104), (50.913345969, 7.272328086), (50.987754572, 6.916671215), (51.023365934, 6.538801464), (51.023963511, 6.138199286), (50.97928388, 5.715135649), (50.923924969, 5.429811378), (50.89525, 5.282018285)],
                knots=[0, 0, 0, 0, 1.152517565, 2.229191352, 3.251443972, 4.233136601, 5.169153376, 6.073002333, 6.979466726, 7.895134038, 8.814564014, 9.731738245, 10.66901877, 11.616660927, 12.618740334, 13.686213184, 14.801498005, 16, 16, 16, 16], degree=3))
            Line((50.89525, 5.282018285), (48.916166667, -4.306481715))
            add(Edge.make_bspline(
                [(48.916166667, -4.306481715), (48.838706266, -4.597052385), (48.687148602, -5.165577869), (48.311448965, -5.952788492), (47.817473721, -6.648200027), (47.212376239, -7.235653604), (46.533647997, -7.724482215), (45.778706123, -8.063324207), (44.971906745, -8.281163221), (44.41262475, -8.30526518), (44.127208333, -8.317565048)],
                knots=[0, 0, 0, 0, 1.06412456, 2.082047477, 3.072647496, 4.071792832, 5.058775816, 6.021176094, 6.990153746, 8, 8, 8, 8], degree=3))
            Line((44.127208333, -8.317565048), (34.395833333, -8.317565048))
            Line((34.395833333, -8.317565048), (33.374541667, -13.058898381))
        make_face()
    extrude(amount=-CUT_EXTRUDE8_DEPTH, mode=Mode.SUBTRACT)


with BuildPart() as cut_extrude8_piece_1:
    # of the separate pieces the step leaves, piece 1, a body of its own (cut_extrude8_pieces)
    add(part.part.solids().sort_by_distance((-106.961346111, 138.033188267, 0))[0])



with BuildPart() as cut_extrude8_piece_2:
    # of the separate pieces the step leaves, piece 2, a body of its own (cut_extrude8_pieces)
    add(part.part.solids().sort_by_distance((-8.138583333, 6.245101619, 0))[0])


with BuildPart() as cut_extrude8_piece_1_1:
    add(cut_extrude8_piece_1.part)

    add(cut_extrude8_piece_2.part)  # Boss-Extrude6 merges Cut-Extrude8 piece 2
    # Sketch14 → Boss-Extrude6 (add)
    with BuildSketch(Plane.XY.offset(3.175)):
        with Locations((-11.017521916, 7.88967512)):
            Rectangle(SKETCH14_W, SKETCH14_H)
        with Locations((-14.795211944, -14.779945163)):
            Rectangle(SKETCH14_W_2, SKETCH14_H_2)
    extrude(amount=-BOSS_EXTRUDE6_DEPTH)

    # Fillet3
    fillet3_edges = [cut_extrude8_piece_1_1.edges().sort_by_distance(p)[0] for p in [
        (102.865544713, 90.311907137, 1.5875),
        (102.865544713, 31.75, 1.5875),
        (-102.865544713, 64.911907137, 1.5875),
        (-102.865544713, 31.75, 1.5875),
        (-102.865544713, 90.311907137, 1.5875),
        (102.865544713, 64.911907137, 1.5875),
    ]]
    fillet(fillet3_edges, radius=FILLET3_R)

    # Sketch15 → Boss-Extrude7 (add)
    # profile 1 of 2: a face of its own
    with BuildSketch(Plane.XY.offset(3.175)):
        with BuildLine():
            ThreePointArc((-102.865544713, -120.914193587), (-124.246259111, -98.815128381), (-140.965544713, -73.008750871))
            Line((-140.965544713, -73.008750871), (-140.965544713, -128.136510034))
            ThreePointArc((-140.965544713, -128.136510034), (-122.97425317, -145.49083496), (-102.865544713, -160.340044003))
            Line((-102.865544713, -160.340044003), (-102.865544713, -120.914193587))
        make_face()
        with Locations((-109.215544713, -123.814275401)):
            Circle(SKETCH15_R, mode=Mode.SUBTRACT)
        with Locations((-134.615544713, -95.585904409)):
            Circle(SKETCH15_R, mode=Mode.SUBTRACT)
    # profile 2 of 2: a face of its own
    with BuildSketch(Plane.XY.offset(3.175)):
        with BuildLine():
            Line((140.965544713, -128.136510034), (140.965544713, -73.008750871))
            ThreePointArc((140.965544713, -73.008750871), (124.246259111, -98.815128381), (102.865544713, -120.914193587))
            Line((102.865544713, -120.914193587), (102.865544713, -160.340044003))
            ThreePointArc((102.865544713, -160.340044003), (122.97425317, -145.49083496), (140.965544713, -128.136510034))
        make_face()
        with Locations((109.215544713, -123.814275401)):
            Circle(SKETCH15_R, mode=Mode.SUBTRACT)
        with Locations((134.615544713, -95.585904409)):
            Circle(SKETCH15_R, mode=Mode.SUBTRACT)
    extrude(amount=BOSS_EXTRUDE7_DEPTH)

    # Sketch16 → Cut-Extrude9 (cut, through all)
    with BuildSketch(Plane.XY.offset(3.175)):
        Circle(SKETCH16_R)
        with Locations((23.411183864, 115.93750226)):
            Rectangle(SKETCH16_W, SKETCH16_H)
    extrude(amount=-CUT_EXTRUDE9_DEPTH, mode=Mode.SUBTRACT)


with BuildPart() as cut_extrude9_piece_1:
    # of the separate pieces the step leaves, piece 1, a body of its own (cut_extrude9_pieces)
    add(cut_extrude8_piece_1_1.part.solids().sort_by_distance((-140.965544713, -128.136510034, 3.175))[0])

    # Chamfer1
    # the kernel refuses this chamfer: 31.030513664, 27.94 mm, written as the material it takes off along each edge
    with BuildSketch(Plane(origin=(0, 0, 36.195), x_dir=(-0.20017923188636447, -0.9797592944807337, 0), z_dir=(0.9797592944807337, -0.20017923188636447, 0))) as chamfer1_piece_1:
        Polygon((158.75 + CHAMFER1_SIZE, 0), (158.75, CHAMFER1_SIZE_2), (158.75, 0), align=None)
    revolve(axis=Axis((0, 0, 36.195), (0, 0, -1)), revolution_arc=79.913485183, mode=Mode.SUBTRACT)

    # Sketch18 → Cut-Extrude12 (cut)
    with BuildSketch(Plane(origin=(0, 0, 3.175), x_dir=(-1, 0, 0), z_dir=(0, 0, -1)).offset(CUT_EXTRUDE12_START)):
        with Locations((134.615544713, -95.585904409)):
            Circle(SKETCH18_R)
        with Locations((109.215544713, -123.814275401)):
            Circle(SKETCH18_R)
    extrude(amount=-CUT_EXTRUDE12_DEPTH, mode=Mode.SUBTRACT)

    # Fillet4
    # the kernel refuses this fillet: 10.16 mm, written as the material it takes off along each edge
    with BuildSketch(Plane(origin=(0, 0, 36.195), x_dir=(-0.4998842027499923, -0.8660922490364434, 0), z_dir=(0.8660922490364434, -0.4998842027499923, 0))) as fillet4_piece_1:
        with BuildLine():
            CenterArc((191.237667396, 10.133185423), FILLET4_R, 222, 43.836372996)
            Line((183.68731597, 3.334818462), (183.536308941, 3.198851123))
            Line((183.536308941, 3.198851123), (186.538992971, -0.135967339))
            Line((186.538992971, -0.135967339), (186.69, -0.2032))
            ThreePointArc((186.69, -0.2032), (188.595, -0.2032), (190.485246652, -0.202663708))
            Line((190.485246652, -0.202663708), (190.5, 0))
        make_face()
    revolve(axis=Axis((0, 0, 36.195), (0, 0, -1)), revolution_arc=22.482929592, mode=Mode.SUBTRACT)


with BuildPart() as cut_extrude9_piece_2:
    # of the separate pieces the step leaves, piece 2, a body of its own (cut_extrude9_pieces)
    add(cut_extrude8_piece_1_1.part.solids().sort_by_distance((140.965544713, -73.008750871, 3.175))[0])

    # Sketch17 → Cut-Extrude10 (cut, through all)
    with BuildSketch(Plane.XY.offset(36.195)):
        with Locations((124.015012721, -121.332950523)):
            Circle(SKETCH17_R)
    extrude(amount=-CUT_EXTRUDE10_DEPTH, mode=Mode.SUBTRACT)


solid = cut_extrude9_piece_1.part
